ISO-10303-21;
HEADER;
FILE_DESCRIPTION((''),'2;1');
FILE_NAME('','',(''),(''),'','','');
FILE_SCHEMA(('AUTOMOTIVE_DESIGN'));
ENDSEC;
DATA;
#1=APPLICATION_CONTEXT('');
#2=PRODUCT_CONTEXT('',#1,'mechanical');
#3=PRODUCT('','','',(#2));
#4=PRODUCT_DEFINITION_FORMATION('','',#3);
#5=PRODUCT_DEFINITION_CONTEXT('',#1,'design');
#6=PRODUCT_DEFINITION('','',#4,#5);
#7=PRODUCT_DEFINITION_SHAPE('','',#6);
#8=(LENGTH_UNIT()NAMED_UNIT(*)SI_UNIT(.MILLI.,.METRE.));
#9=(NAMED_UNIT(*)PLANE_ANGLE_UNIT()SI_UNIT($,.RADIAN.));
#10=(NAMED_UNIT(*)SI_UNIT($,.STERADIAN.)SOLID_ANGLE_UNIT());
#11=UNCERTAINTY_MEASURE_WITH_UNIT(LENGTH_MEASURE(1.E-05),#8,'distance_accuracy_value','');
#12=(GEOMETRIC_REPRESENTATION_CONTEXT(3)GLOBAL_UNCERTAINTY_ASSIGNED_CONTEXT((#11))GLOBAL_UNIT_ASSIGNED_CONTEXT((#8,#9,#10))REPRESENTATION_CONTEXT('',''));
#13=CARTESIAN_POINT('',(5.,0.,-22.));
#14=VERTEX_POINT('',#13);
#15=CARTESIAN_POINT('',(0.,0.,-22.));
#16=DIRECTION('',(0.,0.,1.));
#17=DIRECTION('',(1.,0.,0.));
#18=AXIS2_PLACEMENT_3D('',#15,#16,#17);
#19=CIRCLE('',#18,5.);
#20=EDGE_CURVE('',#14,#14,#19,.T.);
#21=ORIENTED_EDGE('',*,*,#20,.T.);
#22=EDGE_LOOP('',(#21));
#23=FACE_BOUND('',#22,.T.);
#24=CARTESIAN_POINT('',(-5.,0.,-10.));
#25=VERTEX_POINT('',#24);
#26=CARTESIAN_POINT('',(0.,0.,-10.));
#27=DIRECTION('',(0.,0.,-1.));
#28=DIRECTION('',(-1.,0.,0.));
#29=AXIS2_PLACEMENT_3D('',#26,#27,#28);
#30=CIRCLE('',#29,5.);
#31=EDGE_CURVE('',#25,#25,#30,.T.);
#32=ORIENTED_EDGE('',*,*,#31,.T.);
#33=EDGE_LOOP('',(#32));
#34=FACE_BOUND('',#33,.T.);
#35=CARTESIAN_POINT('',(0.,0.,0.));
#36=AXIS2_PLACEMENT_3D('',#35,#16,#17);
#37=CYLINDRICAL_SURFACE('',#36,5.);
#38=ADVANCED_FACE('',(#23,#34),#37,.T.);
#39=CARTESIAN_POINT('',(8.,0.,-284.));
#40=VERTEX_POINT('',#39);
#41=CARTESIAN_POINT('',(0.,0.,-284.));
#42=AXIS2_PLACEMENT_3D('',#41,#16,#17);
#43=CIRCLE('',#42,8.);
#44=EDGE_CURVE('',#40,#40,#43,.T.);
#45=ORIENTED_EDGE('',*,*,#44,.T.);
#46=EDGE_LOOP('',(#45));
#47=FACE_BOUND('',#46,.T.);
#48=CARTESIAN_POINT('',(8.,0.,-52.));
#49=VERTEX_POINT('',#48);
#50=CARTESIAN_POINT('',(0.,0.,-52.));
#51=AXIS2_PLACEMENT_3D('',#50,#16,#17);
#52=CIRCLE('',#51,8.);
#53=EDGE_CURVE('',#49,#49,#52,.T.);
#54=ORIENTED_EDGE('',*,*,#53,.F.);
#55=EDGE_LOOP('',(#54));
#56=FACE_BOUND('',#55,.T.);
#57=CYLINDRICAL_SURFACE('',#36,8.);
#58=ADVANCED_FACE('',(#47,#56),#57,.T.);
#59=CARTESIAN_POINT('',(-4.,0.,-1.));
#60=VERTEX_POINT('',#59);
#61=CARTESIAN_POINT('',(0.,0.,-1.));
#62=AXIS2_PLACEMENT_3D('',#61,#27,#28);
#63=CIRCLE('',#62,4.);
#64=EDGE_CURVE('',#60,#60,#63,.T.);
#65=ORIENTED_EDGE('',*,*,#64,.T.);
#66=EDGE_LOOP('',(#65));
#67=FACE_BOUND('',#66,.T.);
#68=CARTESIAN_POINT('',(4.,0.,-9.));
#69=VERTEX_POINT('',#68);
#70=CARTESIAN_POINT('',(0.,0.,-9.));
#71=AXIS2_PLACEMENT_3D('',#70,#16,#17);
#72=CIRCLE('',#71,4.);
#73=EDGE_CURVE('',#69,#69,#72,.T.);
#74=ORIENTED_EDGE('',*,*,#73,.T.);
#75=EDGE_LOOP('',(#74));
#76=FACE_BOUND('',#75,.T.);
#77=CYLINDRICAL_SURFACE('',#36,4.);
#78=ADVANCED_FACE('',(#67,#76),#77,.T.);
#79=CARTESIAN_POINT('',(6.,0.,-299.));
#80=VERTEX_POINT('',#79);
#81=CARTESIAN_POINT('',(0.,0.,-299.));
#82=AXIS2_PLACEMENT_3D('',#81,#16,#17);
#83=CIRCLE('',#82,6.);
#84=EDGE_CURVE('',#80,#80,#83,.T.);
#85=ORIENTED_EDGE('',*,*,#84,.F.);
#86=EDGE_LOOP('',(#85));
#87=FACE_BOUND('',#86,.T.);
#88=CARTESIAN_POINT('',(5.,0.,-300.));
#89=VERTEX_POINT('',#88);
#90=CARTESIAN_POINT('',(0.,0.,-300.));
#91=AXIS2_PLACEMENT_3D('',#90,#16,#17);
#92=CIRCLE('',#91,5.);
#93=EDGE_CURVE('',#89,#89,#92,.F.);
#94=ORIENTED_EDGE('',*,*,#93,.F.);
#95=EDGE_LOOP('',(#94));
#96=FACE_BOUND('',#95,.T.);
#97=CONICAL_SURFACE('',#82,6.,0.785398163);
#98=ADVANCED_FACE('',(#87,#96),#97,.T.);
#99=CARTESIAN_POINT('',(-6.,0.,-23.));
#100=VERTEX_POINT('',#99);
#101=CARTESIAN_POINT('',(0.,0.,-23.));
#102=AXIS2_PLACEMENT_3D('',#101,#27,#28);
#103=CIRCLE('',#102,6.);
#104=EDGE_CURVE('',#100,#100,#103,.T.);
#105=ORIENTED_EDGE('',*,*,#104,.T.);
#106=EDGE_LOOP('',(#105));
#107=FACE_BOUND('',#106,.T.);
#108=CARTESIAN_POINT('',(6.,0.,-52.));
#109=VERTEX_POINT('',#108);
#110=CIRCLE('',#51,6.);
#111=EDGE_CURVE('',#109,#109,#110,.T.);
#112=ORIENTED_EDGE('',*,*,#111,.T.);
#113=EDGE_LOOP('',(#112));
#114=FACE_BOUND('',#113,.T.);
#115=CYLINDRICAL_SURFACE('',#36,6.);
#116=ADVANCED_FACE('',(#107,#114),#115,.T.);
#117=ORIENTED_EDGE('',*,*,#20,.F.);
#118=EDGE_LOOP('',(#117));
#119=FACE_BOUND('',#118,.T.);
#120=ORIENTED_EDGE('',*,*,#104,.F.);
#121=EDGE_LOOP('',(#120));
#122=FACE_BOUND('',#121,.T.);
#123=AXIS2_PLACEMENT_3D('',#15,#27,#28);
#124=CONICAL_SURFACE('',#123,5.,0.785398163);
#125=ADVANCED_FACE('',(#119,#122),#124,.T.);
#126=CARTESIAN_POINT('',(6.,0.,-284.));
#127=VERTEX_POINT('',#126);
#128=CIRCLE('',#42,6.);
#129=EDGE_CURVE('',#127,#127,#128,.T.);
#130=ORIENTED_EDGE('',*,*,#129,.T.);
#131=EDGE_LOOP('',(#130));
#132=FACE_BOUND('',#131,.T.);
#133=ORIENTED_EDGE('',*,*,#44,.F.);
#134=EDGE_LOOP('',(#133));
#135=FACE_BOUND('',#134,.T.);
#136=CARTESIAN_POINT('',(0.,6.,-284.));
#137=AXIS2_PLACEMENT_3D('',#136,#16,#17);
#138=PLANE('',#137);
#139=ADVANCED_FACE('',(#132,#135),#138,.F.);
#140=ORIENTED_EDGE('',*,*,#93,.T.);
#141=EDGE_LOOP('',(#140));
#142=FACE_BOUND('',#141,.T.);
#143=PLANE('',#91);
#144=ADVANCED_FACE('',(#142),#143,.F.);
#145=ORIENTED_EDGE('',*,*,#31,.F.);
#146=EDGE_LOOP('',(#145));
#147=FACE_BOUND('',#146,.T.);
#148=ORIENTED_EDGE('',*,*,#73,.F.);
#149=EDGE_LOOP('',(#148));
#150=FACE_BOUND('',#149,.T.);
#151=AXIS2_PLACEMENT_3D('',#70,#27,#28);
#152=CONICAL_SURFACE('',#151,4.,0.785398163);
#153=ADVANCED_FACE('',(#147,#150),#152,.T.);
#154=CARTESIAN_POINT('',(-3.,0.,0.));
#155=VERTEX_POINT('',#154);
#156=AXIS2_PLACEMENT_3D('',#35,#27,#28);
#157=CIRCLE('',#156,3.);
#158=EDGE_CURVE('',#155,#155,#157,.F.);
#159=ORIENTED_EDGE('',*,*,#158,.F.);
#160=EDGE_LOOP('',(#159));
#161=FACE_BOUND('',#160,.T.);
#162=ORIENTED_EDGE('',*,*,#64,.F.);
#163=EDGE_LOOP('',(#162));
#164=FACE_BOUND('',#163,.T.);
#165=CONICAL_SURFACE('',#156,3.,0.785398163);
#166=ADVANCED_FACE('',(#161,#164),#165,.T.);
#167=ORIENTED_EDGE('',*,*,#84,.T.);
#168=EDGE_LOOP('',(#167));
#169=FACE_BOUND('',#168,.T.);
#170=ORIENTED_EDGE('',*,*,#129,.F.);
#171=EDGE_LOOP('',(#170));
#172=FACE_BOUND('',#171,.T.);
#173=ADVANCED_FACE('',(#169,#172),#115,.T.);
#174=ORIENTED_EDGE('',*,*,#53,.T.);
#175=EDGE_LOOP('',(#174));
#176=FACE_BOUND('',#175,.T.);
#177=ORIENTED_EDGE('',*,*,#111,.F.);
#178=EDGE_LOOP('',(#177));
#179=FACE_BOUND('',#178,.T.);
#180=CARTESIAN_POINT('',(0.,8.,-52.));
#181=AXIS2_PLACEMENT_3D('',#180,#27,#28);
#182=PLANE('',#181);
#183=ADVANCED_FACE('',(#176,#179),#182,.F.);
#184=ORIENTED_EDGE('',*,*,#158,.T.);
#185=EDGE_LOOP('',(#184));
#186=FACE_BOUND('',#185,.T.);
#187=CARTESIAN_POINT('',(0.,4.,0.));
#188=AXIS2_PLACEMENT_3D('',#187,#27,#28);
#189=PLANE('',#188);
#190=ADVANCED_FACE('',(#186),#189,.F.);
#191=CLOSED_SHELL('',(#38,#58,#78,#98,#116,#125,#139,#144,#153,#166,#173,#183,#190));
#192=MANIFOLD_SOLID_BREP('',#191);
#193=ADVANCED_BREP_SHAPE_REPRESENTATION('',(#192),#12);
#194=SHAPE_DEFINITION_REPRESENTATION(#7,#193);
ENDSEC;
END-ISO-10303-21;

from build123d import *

# Parameters (mm, degrees)
SFAZOWANIE1_SIZE = 1
SFAZOWANIE2_SIZE = 1


with BuildPart() as part:
    # Szkic1 → Obrót1 (revolve)
    with BuildSketch(Plane(origin=(0, 0, 0), x_dir=(0, 0, -1), z_dir=(1, 0, 0)), mode=Mode.PRIVATE) as obr_t1_sk:
        Polygon((0, 0), (300, 0), (300, 6), (284, 6), (284, 8), (52, 8), (52, 6), (22, 6), (22, 5), (9, 5), (9, 4), (0, 4), align=None)
    revolve(obr_t1_sk.sketch.rotate(Axis((0, 0, 0), (0, 0, -1)), 90), axis=Axis((0, 0, 0), (0, 0, -1)))

    # Sfazowanie1
    sfazowanie1_edges = [part.edges().sort_by_distance(p)[0] for p in [
        (-6, 0, -22),
        (-4, 0, 0),
        (-5, 0, -9),
    ]]
    chamfer(sfazowanie1_edges, length=SFAZOWANIE1_SIZE - 0.0001)  # a hair under: the kernel refuses the full size

    # Sfazowanie2
    sfazowanie2_edges = [part.edges().sort_by_distance(p)[0] for p in [
        (-6, 0, -300),
    ]]
    chamfer(sfazowanie2_edges, length=SFAZOWANIE2_SIZE)


solid = part.part
